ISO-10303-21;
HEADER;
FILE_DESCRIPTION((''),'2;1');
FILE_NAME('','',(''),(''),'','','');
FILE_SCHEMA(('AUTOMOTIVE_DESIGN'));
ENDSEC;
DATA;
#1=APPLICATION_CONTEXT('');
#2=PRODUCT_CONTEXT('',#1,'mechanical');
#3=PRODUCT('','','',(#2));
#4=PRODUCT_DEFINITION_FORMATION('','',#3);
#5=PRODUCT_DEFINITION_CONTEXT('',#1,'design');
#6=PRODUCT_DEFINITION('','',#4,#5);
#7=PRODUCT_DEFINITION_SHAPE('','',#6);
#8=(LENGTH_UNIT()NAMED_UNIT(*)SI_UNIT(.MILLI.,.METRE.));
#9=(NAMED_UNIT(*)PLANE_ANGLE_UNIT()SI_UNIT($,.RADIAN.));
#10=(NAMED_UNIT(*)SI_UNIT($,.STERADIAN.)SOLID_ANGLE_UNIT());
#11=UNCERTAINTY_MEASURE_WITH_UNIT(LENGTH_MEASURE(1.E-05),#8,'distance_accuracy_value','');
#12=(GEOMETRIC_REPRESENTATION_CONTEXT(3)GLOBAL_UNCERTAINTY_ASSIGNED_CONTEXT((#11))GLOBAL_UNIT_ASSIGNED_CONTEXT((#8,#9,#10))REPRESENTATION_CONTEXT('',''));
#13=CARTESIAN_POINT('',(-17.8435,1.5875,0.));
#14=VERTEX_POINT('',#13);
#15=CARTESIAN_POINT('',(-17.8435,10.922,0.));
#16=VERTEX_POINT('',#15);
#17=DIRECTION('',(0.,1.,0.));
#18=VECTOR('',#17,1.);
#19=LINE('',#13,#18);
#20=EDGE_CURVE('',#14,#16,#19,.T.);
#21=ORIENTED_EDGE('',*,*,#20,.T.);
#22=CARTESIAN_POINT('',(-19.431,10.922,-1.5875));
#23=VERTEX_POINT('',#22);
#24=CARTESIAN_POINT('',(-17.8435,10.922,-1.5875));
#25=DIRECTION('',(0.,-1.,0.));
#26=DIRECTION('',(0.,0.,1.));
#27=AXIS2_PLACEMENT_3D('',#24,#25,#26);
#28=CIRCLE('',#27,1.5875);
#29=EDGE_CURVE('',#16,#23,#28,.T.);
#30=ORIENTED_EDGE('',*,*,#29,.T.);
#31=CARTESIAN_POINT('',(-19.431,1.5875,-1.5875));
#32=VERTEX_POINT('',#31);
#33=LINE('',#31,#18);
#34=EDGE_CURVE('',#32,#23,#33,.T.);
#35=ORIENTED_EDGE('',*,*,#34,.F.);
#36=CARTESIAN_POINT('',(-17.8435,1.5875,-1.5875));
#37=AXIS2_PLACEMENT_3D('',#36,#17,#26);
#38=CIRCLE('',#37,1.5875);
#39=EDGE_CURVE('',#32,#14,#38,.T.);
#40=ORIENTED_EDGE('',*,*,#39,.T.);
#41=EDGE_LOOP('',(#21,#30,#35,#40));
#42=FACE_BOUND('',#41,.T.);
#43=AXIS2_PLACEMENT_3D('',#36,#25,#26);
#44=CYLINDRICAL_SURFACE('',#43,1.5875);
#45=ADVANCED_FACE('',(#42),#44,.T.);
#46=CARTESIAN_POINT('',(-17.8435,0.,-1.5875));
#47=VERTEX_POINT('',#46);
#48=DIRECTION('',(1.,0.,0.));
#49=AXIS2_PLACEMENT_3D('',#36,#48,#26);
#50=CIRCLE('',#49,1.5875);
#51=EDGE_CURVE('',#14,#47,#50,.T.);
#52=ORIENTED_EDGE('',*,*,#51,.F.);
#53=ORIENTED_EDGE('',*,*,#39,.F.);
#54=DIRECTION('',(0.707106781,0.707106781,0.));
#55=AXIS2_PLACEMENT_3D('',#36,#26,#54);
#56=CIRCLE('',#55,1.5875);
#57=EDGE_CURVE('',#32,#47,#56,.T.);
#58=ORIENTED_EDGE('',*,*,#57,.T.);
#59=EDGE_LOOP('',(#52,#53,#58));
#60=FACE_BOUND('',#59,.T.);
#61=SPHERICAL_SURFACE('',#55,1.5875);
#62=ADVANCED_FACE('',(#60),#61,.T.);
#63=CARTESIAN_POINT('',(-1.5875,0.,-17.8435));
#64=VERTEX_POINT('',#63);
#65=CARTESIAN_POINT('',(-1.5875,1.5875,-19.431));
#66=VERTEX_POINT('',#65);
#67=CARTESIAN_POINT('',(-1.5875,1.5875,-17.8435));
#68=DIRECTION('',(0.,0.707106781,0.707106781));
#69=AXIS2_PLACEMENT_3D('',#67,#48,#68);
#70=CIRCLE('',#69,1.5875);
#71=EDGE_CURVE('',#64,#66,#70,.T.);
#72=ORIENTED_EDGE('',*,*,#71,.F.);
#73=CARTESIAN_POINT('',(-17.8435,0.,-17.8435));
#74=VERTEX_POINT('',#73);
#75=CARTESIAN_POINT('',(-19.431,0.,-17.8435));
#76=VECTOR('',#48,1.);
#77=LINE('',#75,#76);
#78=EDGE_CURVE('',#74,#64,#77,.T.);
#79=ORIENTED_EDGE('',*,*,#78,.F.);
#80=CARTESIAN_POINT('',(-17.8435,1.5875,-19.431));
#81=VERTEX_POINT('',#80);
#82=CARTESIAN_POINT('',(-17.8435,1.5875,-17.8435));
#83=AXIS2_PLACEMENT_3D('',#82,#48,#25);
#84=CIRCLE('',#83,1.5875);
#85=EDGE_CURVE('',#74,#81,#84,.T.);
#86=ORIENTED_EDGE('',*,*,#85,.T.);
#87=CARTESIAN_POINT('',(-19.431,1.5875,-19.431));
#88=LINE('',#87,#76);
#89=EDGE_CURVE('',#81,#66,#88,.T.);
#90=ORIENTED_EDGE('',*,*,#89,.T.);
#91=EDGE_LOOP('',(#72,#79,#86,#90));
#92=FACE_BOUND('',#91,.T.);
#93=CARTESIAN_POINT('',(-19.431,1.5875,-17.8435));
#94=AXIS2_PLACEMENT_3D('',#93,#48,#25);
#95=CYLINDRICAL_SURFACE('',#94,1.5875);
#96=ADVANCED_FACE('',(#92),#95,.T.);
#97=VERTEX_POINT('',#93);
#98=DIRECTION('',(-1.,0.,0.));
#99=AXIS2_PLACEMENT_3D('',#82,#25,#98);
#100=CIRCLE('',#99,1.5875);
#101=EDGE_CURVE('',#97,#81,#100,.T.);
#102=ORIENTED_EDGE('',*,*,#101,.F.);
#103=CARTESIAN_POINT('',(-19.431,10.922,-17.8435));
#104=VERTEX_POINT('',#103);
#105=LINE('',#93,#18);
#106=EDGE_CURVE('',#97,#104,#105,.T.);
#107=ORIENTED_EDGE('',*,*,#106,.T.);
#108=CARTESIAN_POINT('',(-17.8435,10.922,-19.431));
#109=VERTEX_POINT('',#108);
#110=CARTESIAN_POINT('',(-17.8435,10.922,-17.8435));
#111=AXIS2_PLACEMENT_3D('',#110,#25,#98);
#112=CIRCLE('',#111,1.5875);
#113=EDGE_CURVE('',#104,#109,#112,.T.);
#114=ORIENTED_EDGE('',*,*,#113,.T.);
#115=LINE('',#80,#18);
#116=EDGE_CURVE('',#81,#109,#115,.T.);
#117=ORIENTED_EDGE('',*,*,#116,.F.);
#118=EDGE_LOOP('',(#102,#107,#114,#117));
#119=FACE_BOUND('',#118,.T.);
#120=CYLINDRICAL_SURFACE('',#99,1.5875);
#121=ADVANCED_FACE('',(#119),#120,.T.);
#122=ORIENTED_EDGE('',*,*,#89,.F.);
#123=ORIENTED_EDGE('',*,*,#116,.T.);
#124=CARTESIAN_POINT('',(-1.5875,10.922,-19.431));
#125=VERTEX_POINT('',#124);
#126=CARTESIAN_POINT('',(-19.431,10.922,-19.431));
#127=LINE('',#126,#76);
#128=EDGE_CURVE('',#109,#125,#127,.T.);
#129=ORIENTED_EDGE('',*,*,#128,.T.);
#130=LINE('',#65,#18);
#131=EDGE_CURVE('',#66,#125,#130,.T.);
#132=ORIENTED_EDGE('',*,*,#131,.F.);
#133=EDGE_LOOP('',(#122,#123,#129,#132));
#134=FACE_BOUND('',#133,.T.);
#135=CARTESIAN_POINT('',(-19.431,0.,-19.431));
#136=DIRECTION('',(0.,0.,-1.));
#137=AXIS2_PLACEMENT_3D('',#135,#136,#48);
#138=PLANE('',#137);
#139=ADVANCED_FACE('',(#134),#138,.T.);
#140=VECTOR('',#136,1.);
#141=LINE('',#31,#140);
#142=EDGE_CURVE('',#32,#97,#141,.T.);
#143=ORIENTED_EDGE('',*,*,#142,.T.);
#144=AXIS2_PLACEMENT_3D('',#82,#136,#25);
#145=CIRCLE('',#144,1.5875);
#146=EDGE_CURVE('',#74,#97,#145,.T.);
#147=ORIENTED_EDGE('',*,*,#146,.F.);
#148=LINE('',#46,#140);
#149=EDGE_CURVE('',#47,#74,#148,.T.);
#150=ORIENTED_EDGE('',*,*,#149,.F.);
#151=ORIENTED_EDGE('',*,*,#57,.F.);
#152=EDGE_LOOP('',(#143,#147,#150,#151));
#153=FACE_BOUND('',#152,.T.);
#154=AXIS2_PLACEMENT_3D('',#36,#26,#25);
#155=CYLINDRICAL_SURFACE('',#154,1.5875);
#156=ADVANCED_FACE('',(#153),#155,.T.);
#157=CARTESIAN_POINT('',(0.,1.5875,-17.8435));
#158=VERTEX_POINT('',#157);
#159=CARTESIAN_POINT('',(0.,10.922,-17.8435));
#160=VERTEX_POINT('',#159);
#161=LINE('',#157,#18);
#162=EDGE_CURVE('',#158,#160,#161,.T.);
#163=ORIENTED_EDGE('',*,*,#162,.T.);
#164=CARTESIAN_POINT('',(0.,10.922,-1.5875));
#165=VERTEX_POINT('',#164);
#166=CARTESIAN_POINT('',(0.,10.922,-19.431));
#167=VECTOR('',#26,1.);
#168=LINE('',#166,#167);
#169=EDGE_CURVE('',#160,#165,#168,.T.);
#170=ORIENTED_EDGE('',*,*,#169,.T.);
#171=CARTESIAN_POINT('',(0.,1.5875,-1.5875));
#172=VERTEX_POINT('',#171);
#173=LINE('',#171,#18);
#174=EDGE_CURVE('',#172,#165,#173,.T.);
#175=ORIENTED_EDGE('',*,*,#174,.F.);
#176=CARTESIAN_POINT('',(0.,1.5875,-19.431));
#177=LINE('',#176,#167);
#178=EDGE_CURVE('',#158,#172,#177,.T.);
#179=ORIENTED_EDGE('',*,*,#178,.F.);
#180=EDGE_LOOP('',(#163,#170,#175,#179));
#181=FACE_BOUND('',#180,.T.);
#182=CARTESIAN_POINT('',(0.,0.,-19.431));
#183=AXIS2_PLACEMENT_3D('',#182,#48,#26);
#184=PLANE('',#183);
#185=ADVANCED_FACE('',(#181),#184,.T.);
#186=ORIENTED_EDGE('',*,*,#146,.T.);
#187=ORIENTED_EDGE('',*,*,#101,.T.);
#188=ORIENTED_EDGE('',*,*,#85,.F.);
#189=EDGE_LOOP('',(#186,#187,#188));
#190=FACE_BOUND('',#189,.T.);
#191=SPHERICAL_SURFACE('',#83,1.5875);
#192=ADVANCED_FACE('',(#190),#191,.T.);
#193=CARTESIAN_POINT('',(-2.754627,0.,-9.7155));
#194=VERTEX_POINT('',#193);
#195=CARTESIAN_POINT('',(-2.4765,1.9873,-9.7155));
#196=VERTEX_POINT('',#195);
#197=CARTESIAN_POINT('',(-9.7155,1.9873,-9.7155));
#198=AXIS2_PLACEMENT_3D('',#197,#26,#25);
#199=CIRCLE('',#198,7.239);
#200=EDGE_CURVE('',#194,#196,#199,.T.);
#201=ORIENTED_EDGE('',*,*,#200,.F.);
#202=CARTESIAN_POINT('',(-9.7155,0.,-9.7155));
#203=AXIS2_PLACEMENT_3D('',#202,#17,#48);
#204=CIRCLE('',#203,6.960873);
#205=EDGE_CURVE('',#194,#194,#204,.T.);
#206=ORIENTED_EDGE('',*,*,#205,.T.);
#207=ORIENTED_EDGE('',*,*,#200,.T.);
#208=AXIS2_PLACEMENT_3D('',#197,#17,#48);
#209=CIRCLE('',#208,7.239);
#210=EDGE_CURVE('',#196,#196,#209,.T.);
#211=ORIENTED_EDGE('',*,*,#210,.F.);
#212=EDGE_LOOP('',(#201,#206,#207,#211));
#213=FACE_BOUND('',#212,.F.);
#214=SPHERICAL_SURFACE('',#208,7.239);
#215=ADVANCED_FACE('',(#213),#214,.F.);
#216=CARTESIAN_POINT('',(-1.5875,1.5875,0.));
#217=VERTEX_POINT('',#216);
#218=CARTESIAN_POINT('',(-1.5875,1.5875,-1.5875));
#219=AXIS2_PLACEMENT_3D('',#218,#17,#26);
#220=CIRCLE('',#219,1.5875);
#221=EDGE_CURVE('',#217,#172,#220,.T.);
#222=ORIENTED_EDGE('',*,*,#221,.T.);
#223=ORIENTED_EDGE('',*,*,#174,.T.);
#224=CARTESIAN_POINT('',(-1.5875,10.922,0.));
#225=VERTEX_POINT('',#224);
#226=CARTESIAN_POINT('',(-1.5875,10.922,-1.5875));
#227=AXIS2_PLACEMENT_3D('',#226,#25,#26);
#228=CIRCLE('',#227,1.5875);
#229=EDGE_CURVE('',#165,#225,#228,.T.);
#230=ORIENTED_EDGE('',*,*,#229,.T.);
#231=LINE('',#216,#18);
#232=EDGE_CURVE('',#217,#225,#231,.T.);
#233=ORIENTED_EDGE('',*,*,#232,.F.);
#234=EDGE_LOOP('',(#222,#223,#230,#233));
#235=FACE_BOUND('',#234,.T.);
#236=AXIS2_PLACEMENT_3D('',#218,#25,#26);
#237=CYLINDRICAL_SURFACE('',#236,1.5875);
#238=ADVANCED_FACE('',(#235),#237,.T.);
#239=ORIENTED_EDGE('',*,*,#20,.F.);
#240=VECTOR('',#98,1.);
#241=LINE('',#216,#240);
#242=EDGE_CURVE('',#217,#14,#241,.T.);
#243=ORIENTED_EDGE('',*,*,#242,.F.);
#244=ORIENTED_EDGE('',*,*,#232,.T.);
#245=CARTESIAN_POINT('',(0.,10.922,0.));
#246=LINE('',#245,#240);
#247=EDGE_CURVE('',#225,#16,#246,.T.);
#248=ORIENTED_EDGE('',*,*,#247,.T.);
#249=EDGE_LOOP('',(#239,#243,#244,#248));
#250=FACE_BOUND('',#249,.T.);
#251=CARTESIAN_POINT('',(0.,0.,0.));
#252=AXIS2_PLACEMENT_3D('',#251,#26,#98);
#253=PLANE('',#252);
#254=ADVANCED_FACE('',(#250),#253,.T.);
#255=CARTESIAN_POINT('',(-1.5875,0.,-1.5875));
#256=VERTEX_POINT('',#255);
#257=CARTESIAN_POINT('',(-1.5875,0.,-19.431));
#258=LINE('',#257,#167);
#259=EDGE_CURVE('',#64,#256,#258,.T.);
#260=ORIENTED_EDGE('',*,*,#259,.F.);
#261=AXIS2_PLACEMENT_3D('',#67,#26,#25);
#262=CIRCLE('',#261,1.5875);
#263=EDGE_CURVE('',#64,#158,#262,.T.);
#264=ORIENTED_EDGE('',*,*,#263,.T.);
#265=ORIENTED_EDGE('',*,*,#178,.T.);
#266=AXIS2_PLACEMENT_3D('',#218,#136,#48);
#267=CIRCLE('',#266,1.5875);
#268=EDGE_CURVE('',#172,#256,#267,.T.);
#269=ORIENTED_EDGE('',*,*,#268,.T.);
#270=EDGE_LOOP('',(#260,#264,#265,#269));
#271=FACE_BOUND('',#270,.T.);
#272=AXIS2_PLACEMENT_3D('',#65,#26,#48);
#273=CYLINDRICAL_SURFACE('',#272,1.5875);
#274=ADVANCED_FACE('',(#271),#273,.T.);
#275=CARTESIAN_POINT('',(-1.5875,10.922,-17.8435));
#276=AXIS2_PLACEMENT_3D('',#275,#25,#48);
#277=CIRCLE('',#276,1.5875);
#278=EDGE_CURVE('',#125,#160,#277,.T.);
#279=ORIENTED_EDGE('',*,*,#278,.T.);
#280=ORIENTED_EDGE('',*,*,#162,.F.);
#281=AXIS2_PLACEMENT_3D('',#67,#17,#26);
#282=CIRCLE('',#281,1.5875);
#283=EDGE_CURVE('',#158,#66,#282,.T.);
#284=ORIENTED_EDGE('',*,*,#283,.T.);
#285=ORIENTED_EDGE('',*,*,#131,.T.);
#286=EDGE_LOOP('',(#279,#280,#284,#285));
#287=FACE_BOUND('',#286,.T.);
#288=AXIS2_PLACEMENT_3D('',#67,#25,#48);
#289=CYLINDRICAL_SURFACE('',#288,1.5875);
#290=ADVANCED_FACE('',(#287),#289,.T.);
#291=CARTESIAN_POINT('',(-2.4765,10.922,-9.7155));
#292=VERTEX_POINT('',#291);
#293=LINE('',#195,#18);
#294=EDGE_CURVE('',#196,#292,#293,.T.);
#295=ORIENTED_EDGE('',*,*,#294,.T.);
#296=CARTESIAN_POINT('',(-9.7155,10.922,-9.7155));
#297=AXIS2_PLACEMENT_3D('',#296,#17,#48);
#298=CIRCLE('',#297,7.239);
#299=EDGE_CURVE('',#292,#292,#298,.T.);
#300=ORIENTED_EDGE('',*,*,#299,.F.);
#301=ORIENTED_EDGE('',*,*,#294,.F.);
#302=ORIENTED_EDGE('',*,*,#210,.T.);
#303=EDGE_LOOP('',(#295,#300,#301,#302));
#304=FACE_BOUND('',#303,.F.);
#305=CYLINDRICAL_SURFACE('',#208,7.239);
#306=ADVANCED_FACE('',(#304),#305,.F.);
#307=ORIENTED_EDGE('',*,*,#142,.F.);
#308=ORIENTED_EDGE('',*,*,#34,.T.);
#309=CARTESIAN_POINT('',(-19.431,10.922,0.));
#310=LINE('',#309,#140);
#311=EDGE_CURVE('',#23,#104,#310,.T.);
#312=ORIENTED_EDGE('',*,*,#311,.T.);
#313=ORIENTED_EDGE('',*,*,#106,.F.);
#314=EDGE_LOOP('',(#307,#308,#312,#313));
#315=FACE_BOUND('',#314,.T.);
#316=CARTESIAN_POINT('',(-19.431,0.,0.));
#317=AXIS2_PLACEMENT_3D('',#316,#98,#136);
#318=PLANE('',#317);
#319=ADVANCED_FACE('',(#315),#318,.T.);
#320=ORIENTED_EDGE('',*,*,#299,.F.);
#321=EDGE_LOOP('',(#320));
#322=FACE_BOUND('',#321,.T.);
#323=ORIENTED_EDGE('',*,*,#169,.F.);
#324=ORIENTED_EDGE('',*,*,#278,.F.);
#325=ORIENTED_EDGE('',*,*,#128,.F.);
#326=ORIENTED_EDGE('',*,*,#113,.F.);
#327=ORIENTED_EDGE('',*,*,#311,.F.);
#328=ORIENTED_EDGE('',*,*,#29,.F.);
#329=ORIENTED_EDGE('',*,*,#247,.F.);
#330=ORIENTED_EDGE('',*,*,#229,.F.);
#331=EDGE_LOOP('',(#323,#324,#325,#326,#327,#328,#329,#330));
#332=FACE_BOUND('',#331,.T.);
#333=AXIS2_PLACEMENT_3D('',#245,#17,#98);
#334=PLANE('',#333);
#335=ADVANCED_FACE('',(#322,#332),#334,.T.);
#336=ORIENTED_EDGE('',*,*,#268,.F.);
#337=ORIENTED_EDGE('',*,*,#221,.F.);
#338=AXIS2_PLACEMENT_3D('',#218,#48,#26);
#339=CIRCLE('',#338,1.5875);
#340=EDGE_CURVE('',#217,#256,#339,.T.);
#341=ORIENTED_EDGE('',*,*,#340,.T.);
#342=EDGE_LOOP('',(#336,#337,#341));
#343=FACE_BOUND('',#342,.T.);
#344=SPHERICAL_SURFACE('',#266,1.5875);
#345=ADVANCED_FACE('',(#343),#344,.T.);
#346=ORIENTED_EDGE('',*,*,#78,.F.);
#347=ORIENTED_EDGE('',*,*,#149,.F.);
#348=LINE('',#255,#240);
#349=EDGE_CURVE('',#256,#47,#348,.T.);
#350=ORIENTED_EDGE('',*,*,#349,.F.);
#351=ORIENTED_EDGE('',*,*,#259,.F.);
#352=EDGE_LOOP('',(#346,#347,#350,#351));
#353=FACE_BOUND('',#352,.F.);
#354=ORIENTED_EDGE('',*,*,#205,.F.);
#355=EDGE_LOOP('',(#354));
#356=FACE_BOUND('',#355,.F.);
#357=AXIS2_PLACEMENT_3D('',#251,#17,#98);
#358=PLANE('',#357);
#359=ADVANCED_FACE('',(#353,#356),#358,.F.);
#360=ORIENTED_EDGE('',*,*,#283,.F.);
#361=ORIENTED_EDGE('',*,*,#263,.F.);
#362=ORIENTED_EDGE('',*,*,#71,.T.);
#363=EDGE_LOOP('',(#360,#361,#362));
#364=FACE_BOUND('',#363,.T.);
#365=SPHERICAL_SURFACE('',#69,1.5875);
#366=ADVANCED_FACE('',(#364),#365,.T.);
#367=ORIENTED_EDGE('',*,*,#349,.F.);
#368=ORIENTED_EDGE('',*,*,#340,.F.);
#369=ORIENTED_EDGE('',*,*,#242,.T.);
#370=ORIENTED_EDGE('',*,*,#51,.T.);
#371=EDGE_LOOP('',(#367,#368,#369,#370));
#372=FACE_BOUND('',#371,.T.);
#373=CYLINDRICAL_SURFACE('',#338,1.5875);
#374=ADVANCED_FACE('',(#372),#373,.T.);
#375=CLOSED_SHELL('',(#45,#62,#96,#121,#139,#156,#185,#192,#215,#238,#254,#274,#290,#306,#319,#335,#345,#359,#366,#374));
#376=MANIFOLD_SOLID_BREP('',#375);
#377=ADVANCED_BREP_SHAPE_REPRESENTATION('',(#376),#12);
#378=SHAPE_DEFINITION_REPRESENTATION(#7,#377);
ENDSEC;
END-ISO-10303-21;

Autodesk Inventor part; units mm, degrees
ref_plane "YZ Plane" through (0, 0, 0) normal (1, 0, 0) x (0, 1, 0)
ref_plane "XZ Plane" through (0, 0, 0) normal (0, 1, 0) x (-1, 0, 0)
sketch "Sketch1" plane through (0, 0, 0) normal (0, 1, 0) x (-1, 0, 0)
  line L0 (0, 0) -> (19.431, 0)
  line L1 (19.431, 0) -> (19.431, -19.431)
  line L2 (19.431, -19.431) -> (0, -19.431)
  line L3 (0, -19.431) -> (0, 0)
  dimension "d0" = 19.431
  dimension "d1" = 19.431
extrude "Extrusion1" add sketch "Sketch1" along normal blind 10.922
ref_plane "Work Plane2" through (-19.431, 0, -9.7155) normal (0, 0, 1) x (1, 0, 0)
sketch "Sketch2" plane through (-19.431, 0, -9.7155) normal (0, 0, 1) x (1, 0, 0)
  arc A0 (9.7155, -5.2517) -> (16.9545, 1.9873) centre (9.7155, 1.9873) ccw
  line L0 (16.9545, 1.9873) -> (16.9545, 10.922)
  line L1 (19.431, 10.922) -> (0, 10.922) projected
  line L2 (9.7155, -5.3792) -> (9.7155, 10.922)
  line L3 (16.9545, 10.922) -> (9.7155, 10.922)
  point P0 (19.431, 0)
  dimension "d4" = 14.478
revolve "Revolution1" cut sketch "Sketch2" angle 360 about axis through (-9.7155, -5.3792, -9.7155) along (0, 1, 0)
fillet "Fillet1" radius 1.5875 2 edges at (-9.7155, 0, -19.431) (0, 0, -9.7155)
fillet "Fillet2" radius 1.5875 9 edges at (-19.431, 0, -8.9218) (-19.431, 0.465, -18.966) (-19.431, 6.2548, -19.431) (-0.465, 0.465, 0) (0, 6.2548, 0) (-10.5092, 0, 0) (-0.465, 0.465, -18.966) (0, 6.2548, -19.431) (-19.431, 5.461, 0)
equation "\"d1\" = d0"
properties part number "tail-rolley-polley"
